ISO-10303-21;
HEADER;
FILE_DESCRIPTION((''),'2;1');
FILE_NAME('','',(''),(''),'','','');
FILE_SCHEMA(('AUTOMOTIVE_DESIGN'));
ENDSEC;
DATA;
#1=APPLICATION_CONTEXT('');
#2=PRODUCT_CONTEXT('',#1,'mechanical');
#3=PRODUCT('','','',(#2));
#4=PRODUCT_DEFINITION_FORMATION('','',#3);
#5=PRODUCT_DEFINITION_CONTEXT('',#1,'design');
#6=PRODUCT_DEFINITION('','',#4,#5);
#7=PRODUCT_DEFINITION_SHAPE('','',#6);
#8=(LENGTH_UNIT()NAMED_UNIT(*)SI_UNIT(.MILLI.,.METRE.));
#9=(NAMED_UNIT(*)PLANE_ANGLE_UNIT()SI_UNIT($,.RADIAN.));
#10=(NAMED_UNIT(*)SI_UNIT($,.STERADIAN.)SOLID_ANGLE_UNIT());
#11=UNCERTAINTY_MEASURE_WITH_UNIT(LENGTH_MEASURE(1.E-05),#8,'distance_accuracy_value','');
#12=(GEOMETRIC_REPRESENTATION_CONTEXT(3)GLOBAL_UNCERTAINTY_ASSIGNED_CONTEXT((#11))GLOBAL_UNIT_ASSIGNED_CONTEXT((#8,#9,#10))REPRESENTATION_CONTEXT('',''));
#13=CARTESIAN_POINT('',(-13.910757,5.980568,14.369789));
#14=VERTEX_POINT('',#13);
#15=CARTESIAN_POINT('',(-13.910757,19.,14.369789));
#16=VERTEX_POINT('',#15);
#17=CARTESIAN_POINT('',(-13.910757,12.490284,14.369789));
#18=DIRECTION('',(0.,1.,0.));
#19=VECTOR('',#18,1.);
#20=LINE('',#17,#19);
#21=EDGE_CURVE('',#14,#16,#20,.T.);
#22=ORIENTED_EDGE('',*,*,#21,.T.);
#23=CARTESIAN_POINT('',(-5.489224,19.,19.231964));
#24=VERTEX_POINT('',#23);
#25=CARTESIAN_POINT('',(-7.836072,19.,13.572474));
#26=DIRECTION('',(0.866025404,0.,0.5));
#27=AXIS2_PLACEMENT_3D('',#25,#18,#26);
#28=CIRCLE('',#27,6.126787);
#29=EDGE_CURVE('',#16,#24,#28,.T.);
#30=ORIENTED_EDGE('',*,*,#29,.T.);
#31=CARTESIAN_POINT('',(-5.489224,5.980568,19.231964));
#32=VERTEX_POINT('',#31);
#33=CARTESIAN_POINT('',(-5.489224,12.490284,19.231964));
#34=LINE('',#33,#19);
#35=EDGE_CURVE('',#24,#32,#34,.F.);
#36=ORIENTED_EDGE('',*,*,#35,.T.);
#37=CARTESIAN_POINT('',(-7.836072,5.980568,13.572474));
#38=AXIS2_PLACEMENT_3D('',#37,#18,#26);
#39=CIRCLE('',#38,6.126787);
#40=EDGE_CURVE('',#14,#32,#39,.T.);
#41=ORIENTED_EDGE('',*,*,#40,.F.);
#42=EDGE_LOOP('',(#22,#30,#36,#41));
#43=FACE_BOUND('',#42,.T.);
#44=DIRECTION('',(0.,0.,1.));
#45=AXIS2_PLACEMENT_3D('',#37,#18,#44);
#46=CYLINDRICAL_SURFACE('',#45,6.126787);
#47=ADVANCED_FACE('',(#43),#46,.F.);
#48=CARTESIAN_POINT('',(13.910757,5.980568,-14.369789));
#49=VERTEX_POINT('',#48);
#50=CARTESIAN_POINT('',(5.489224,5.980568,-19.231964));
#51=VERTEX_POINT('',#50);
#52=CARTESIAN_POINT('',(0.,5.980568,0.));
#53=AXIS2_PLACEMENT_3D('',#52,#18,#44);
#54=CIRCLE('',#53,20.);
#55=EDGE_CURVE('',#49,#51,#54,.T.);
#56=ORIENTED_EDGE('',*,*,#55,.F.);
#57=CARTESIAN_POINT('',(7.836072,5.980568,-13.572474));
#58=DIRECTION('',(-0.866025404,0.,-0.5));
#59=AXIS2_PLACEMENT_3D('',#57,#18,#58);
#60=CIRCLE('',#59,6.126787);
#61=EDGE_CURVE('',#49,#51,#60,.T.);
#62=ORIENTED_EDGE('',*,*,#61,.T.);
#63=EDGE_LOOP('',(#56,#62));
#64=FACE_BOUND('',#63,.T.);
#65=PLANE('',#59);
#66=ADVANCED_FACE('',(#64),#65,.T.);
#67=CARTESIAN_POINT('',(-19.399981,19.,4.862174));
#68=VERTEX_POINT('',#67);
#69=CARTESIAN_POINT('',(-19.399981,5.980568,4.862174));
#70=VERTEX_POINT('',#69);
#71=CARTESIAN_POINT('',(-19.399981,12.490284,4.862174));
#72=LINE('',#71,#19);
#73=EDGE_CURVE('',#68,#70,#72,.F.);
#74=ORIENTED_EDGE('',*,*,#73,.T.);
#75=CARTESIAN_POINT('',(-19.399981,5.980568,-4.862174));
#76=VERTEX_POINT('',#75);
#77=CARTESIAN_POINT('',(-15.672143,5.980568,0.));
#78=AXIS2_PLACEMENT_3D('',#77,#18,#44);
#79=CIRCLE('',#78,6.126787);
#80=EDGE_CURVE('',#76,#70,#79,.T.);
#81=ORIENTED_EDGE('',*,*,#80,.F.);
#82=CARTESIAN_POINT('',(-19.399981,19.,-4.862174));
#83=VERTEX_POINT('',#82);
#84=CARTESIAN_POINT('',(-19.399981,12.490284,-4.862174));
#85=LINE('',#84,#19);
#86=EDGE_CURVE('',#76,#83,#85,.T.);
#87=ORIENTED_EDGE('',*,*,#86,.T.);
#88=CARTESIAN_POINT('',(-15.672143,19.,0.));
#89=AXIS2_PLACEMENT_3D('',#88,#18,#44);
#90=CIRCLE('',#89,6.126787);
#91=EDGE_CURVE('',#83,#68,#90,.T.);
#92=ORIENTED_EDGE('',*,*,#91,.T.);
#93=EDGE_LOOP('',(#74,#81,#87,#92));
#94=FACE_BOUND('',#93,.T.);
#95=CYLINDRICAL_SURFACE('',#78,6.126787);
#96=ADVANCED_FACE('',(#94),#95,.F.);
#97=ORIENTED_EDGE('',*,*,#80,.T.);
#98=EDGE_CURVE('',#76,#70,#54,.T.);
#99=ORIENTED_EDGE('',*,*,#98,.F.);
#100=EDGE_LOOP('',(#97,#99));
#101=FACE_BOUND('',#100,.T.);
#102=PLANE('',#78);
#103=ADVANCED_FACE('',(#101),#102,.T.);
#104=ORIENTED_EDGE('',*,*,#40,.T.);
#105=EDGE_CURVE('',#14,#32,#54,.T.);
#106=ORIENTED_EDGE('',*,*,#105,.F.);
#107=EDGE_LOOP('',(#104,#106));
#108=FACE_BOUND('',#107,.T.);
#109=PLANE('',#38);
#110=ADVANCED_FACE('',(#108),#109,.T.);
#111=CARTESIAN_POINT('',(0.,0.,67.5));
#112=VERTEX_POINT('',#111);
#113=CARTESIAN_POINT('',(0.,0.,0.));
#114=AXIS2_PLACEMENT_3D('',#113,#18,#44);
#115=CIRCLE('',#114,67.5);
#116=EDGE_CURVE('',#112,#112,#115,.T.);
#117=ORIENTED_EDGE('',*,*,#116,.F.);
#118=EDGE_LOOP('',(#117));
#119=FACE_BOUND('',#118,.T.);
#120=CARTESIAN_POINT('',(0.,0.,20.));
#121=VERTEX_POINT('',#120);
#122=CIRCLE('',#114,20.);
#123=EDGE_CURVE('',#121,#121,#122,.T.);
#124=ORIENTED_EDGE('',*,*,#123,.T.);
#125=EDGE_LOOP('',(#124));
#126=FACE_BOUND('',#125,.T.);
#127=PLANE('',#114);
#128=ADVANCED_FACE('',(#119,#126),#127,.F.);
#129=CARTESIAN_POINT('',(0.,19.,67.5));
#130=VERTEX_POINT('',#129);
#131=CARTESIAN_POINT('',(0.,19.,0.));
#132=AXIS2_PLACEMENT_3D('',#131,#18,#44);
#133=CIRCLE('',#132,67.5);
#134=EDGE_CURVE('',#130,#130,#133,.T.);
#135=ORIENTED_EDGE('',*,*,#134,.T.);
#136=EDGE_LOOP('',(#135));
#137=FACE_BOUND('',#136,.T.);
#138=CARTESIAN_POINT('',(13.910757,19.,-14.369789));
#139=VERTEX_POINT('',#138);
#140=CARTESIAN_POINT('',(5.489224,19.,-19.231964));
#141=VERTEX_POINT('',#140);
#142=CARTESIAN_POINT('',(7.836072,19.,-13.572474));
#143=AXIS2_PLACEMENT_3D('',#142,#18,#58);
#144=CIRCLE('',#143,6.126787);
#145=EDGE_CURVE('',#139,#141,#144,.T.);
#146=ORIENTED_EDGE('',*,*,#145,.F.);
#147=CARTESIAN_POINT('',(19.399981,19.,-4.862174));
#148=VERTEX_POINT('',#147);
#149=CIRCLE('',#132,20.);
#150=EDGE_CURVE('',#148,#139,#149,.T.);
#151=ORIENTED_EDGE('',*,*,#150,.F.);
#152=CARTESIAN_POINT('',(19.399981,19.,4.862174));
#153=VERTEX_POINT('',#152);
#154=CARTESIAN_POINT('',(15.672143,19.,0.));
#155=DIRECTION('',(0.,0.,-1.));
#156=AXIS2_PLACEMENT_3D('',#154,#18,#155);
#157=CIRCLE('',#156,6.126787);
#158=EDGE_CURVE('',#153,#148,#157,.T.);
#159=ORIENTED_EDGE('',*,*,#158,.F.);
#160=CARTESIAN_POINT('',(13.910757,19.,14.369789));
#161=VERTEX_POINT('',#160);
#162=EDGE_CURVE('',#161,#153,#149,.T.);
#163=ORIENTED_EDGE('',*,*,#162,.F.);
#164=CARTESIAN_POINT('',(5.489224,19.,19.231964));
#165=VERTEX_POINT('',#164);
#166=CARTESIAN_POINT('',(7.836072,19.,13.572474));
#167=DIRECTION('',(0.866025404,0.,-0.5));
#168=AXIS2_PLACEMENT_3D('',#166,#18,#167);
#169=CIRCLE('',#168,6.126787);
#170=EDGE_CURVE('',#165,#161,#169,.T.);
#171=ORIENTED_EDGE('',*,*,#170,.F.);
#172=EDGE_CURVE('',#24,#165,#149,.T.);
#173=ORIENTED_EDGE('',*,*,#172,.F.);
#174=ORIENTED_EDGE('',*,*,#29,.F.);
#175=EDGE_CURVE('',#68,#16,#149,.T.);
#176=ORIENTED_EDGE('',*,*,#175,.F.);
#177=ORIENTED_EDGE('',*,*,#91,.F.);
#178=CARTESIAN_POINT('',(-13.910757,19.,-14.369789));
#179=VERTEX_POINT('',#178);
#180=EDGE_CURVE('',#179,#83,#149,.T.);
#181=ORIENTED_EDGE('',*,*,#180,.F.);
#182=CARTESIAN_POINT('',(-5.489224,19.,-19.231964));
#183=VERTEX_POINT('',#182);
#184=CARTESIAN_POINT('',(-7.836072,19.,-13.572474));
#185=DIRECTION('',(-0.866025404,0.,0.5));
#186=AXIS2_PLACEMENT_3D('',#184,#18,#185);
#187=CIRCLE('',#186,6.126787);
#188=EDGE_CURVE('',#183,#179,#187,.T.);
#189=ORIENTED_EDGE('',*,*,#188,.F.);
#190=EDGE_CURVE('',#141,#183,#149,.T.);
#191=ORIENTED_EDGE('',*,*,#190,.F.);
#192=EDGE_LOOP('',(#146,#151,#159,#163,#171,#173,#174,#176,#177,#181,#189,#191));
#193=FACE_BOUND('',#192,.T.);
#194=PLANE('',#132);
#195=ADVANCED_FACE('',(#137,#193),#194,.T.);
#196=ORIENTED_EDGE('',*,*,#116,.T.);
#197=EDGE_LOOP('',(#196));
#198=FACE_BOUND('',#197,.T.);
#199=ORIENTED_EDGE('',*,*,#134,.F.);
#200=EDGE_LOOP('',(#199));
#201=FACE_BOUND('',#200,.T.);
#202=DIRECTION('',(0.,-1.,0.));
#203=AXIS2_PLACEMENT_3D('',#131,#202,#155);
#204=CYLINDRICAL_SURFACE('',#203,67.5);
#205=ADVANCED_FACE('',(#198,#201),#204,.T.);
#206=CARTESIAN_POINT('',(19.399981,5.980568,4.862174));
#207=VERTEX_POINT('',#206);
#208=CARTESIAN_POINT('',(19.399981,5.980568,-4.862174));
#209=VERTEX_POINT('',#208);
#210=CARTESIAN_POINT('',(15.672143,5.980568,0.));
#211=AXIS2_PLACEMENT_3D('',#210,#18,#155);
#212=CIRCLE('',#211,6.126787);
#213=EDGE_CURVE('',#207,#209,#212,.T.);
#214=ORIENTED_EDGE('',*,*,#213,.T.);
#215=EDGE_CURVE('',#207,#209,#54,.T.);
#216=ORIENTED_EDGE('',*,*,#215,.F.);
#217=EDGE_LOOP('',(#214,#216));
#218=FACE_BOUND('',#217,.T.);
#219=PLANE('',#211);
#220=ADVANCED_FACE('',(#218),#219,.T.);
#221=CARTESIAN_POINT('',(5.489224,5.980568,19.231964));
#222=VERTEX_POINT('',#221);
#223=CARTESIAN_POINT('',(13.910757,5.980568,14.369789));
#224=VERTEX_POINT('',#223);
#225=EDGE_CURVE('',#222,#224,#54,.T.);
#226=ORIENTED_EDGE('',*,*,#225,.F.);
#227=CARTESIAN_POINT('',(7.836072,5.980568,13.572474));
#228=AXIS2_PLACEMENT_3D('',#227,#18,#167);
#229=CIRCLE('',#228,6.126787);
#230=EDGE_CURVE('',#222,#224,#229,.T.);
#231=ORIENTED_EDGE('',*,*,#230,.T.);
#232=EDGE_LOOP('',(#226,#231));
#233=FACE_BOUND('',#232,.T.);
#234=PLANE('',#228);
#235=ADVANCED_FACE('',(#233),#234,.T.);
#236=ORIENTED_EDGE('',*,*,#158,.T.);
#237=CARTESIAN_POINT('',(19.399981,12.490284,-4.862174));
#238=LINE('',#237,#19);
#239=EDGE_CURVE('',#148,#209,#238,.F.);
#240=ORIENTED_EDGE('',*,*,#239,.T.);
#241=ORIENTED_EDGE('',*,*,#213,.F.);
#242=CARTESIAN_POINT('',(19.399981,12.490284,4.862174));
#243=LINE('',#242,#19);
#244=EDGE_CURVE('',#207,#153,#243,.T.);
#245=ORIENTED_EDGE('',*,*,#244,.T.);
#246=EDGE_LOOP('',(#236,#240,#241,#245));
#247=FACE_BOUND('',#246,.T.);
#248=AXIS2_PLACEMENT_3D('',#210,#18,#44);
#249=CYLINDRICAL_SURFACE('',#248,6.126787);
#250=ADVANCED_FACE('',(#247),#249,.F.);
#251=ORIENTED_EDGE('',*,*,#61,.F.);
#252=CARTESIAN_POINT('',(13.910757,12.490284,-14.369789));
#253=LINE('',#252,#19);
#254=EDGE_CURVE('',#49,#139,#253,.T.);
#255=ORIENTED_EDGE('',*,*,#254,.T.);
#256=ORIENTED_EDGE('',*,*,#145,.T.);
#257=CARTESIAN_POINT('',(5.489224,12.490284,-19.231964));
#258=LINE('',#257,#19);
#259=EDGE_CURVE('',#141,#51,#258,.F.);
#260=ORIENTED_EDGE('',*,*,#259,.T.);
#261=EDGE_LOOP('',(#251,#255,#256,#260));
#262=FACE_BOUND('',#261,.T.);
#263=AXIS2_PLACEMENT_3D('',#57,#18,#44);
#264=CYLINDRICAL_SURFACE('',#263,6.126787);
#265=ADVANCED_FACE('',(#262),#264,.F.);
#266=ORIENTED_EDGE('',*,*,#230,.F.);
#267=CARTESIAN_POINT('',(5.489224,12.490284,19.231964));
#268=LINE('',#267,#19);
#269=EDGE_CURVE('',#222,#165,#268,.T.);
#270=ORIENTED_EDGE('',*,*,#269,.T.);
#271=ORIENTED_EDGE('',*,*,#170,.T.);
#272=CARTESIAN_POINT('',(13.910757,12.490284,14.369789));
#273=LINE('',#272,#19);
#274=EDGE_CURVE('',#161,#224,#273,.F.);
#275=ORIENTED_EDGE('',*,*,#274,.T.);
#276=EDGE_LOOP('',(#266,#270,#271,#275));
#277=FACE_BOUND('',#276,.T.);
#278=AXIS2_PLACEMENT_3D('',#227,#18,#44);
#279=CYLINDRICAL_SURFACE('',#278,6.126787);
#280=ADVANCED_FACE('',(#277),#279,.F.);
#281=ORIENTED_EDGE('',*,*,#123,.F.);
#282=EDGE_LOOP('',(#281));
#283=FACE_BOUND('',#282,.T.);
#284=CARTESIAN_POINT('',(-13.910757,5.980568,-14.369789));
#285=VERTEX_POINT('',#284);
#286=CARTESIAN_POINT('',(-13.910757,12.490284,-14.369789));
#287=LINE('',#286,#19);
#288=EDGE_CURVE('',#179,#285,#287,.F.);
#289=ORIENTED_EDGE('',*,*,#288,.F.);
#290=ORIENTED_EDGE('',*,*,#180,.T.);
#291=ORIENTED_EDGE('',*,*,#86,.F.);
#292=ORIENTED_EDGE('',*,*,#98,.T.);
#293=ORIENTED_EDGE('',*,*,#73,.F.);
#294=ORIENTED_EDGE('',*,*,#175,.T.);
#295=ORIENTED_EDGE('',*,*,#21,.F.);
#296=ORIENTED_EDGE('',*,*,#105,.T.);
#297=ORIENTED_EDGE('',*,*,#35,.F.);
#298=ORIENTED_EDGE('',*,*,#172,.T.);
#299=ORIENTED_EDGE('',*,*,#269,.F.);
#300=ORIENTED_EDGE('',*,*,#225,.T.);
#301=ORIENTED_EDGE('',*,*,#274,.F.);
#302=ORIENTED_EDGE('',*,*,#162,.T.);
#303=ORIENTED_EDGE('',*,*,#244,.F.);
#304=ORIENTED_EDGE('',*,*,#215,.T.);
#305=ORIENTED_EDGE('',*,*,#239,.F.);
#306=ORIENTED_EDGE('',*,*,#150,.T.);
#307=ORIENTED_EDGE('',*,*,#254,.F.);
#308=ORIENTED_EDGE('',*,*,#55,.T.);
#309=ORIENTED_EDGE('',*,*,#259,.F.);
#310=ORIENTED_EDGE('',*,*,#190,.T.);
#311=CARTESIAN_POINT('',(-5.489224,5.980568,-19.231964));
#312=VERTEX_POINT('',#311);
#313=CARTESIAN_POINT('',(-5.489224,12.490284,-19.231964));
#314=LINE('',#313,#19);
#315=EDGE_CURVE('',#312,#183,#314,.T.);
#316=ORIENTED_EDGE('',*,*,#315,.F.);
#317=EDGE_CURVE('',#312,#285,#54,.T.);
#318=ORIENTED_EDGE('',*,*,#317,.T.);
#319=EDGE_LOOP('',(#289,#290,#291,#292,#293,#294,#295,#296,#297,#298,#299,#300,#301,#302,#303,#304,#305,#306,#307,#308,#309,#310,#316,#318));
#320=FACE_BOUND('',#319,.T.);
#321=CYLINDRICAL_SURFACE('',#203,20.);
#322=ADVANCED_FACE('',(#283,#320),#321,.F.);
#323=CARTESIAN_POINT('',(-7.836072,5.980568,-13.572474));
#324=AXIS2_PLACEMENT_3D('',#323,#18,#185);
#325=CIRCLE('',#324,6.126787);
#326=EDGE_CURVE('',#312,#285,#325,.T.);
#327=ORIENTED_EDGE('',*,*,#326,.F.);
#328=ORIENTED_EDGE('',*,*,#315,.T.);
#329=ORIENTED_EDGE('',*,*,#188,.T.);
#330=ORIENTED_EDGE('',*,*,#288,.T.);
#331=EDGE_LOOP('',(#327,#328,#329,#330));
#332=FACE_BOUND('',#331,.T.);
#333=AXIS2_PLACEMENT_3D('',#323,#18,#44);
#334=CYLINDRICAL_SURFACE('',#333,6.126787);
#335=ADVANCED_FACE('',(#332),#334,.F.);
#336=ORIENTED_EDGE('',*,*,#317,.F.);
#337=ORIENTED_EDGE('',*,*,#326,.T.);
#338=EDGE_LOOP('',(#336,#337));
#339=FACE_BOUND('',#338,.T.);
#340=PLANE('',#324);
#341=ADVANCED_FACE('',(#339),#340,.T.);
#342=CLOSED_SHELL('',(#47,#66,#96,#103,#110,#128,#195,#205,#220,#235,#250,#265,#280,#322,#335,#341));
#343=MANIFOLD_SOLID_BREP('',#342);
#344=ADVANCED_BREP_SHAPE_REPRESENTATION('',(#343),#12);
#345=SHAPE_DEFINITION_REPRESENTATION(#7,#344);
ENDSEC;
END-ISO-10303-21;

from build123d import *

# Parameters (mm, degrees)
SKETCH1_R           = 67.5
BOSS_EXTRUDE1_DEPTH = 19
SKETCH2_R           = 20
CUT_EXTRUDE1_DEPTH  = 98.331906382
SKETCH3_R           = 6.12678653
CUT_EXTRUDE2_DEPTH  = 13.019431903
CIRPATTERN1_COUNT   = 6


with BuildPart() as part:
    # Sketch1 → Boss-Extrude1 (new body)
    with BuildSketch(Plane(origin=(0, 0, 0), x_dir=(1, 0, 0), z_dir=(0, 1, 0))):
        Circle(SKETCH1_R)
    extrude(amount=BOSS_EXTRUDE1_DEPTH)

    # Sketch2 → Cut-Extrude1 (cut, through all)
    with BuildSketch(Plane(origin=(0, 0, 0), x_dir=(1, 0, 0), z_dir=(0, 1, 0))):
        Circle(SKETCH2_R)
    extrude(amount=CUT_EXTRUDE1_DEPTH, mode=Mode.SUBTRACT)

    # Sketch3 → Cut-Extrude2 (cut)
    with BuildSketch(Plane(origin=(0, 19, 0), x_dir=(1, 0, 0), z_dir=(0, 1, 0))):
        with Locations((-15.672143417, 0)):
            Circle(SKETCH3_R)
    cut_extrude2 = extrude(amount=-CUT_EXTRUDE2_DEPTH, mode=Mode.SUBTRACT)

    # CirPattern1: Cut-Extrude2 ×6 about axis
    cirpattern1_axis = Axis((0, 0, 0), (0, 1, 0))
    for i in range(1, CIRPATTERN1_COUNT):
        add(cut_extrude2.rotate(cirpattern1_axis, i * 360 / CIRPATTERN1_COUNT), mode=Mode.SUBTRACT)


solid = part.part
